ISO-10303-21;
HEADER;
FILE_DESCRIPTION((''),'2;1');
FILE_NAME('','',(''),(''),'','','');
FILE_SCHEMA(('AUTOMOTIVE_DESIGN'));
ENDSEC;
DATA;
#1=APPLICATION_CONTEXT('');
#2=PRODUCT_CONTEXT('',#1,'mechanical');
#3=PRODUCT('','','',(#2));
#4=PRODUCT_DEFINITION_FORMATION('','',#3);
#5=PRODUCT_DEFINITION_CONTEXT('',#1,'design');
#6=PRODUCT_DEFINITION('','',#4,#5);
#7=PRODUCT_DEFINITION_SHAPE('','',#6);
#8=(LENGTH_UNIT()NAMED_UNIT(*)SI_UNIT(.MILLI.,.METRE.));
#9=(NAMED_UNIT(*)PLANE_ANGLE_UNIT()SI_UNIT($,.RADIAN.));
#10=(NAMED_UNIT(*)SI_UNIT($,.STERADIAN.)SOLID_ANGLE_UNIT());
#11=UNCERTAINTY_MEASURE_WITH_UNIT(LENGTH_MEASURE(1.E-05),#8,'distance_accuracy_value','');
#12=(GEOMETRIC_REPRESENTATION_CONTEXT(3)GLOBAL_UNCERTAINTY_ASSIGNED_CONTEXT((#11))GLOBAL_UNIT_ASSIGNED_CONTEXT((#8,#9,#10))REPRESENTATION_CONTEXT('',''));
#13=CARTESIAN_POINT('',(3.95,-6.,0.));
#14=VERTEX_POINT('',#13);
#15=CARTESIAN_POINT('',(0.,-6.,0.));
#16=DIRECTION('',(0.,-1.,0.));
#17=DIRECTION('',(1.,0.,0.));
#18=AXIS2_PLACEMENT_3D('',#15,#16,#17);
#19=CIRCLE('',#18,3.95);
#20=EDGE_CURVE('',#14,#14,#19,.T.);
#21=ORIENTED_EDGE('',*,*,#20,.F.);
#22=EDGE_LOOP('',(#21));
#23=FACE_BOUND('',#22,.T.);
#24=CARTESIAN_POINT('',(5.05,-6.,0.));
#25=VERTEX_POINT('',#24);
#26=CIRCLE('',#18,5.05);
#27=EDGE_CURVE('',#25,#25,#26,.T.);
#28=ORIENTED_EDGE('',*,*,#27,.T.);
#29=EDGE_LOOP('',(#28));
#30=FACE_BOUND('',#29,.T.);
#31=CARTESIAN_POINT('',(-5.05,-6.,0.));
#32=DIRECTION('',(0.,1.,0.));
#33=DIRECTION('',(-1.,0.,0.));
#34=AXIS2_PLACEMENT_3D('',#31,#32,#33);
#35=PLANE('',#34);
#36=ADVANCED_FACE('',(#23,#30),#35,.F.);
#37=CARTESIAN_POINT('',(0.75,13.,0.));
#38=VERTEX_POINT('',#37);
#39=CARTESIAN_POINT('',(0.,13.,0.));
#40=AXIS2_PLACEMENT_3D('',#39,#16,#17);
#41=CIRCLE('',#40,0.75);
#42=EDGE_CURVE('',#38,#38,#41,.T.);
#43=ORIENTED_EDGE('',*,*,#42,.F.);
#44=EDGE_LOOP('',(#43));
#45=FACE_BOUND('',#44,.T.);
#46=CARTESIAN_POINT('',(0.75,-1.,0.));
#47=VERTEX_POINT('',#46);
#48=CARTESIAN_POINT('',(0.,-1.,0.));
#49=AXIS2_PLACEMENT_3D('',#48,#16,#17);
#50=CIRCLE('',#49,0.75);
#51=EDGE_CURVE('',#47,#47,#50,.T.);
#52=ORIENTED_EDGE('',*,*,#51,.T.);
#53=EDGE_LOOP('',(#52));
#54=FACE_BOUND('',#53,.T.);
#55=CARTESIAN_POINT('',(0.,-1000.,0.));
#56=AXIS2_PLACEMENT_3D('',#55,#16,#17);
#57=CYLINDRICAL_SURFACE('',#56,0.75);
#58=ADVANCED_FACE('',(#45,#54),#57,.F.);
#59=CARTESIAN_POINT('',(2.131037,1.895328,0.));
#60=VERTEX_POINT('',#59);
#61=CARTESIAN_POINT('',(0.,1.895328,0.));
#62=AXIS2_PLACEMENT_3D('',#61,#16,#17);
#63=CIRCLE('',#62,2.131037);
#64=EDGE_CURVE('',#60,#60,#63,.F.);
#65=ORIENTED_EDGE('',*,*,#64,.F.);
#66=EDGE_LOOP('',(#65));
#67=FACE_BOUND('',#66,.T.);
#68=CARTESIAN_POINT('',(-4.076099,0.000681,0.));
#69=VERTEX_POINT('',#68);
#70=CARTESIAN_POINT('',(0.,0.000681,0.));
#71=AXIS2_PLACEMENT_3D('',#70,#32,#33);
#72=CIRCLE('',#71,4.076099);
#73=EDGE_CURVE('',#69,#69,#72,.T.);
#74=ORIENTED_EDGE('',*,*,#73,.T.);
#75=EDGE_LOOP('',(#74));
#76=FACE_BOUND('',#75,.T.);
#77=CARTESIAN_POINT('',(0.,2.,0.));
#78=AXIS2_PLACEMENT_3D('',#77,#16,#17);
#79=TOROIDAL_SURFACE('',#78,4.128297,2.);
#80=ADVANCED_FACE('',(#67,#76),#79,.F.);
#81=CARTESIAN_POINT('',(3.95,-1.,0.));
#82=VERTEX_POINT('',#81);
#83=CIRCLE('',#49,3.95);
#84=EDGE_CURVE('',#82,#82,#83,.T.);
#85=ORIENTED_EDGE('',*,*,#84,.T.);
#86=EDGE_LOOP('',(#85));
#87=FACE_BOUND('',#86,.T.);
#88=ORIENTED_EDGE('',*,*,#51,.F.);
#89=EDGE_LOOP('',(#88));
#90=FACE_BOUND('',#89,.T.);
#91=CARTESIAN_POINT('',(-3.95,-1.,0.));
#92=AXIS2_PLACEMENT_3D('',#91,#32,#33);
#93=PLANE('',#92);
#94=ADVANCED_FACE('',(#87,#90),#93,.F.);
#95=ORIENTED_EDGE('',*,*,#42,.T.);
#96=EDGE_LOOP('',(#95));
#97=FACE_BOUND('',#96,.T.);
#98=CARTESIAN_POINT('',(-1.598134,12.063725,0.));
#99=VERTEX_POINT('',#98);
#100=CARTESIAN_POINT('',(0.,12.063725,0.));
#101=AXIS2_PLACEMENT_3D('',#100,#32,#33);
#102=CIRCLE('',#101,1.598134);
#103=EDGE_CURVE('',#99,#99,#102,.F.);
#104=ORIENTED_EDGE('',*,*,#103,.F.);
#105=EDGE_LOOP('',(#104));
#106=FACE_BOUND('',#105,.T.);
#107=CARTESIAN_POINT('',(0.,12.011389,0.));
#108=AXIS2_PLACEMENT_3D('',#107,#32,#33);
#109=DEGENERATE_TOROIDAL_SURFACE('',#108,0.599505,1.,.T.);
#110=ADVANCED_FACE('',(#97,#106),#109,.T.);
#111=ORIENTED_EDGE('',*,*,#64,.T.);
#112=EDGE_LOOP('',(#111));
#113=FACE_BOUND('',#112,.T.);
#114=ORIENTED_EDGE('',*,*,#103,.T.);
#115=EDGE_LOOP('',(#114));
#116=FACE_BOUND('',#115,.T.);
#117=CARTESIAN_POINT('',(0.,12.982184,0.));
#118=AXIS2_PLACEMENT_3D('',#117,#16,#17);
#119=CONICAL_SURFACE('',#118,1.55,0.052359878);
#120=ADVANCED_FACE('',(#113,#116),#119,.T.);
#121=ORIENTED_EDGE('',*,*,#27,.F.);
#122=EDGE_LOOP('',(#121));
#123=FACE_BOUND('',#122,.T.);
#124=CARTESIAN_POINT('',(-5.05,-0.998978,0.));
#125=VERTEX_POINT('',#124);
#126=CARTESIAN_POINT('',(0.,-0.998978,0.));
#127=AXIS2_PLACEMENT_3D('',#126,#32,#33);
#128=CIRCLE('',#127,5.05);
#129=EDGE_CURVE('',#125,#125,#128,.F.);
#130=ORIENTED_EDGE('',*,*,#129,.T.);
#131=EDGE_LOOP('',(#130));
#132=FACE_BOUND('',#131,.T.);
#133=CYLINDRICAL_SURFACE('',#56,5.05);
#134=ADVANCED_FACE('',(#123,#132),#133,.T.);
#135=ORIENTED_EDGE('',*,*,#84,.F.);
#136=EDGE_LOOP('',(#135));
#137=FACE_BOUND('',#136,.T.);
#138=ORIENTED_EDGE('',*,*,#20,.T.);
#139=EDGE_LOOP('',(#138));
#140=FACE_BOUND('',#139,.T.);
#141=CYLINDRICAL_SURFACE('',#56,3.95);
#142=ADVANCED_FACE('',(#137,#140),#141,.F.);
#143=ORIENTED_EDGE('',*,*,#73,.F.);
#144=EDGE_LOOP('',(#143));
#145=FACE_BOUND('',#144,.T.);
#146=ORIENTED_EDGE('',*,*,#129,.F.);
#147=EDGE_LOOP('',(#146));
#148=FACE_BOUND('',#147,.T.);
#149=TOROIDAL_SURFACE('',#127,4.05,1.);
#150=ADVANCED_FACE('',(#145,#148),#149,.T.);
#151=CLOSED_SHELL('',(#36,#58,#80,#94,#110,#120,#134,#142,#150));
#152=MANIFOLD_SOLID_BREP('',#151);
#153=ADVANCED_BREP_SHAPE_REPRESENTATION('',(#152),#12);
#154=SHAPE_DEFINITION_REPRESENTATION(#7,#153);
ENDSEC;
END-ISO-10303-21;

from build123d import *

# Parameters (mm, degrees)
FILLET2_R = 2
FILLET3_R = 1
FILLET4_R = 1


with BuildPart() as part:
    # Sketch2 → Revolve1 (revolve)
    with BuildSketch(Plane.XY, mode=Mode.PRIVATE) as revolve1_sk:
        Polygon((-1.55, 12.982183952), (-2.230367431, 0), (-5.05, 0), (-5.05, -6), (-3.95, -6), (-3.95, -1), (-0.75, -1), (-0.75, 13), align=None)
    revolve(revolve1_sk.sketch.rotate(Axis((0, -1000, 0), (0, 1, 0)), 180), axis=Axis((0, -1000, 0), (0, 1, 0)))

    # Fillet2
    fillet2_edges = [part.edges().sort_by_distance(p)[0] for p in [
        (-2.230367431, 0, 0),
    ]]
    fillet(fillet2_edges, radius=FILLET2_R)

    # Fillet3
    fillet3_edges = [part.edges().sort_by_distance(p)[0] for p in [
        (-5.05, 0, 0),
    ]]
    fillet(fillet3_edges, radius=FILLET3_R)

    # Fillet4
    # the kernel refuses this fillet: 1 mm, written as the material it takes off along each edge
    with BuildSketch(Plane(origin=(0, 12.982183952, 0), x_dir=(1, 0, 0), z_dir=(0, 0, 1))) as fillet4_piece_1:
        with BuildLine():
            CenterArc((0.599504848, -0.970794699), FILLET4_R, 3, 78.344377595)
            Line((0.75, 0.017816048), (0.753009903, 0.037588263))
            ThreePointArc((0.753009903, 0.037588263), (1.150445291, 0.028903066), (1.550445291, 0.019995042))
            Line((1.550445291, 0.019995042), (1.569972591, 0.001046719))
            Line((1.569972591, 0.001046719), (1.618106974, -0.917412024))
            Line((1.618106974, -0.917412024), (1.598134383, -0.918458743))
        make_face()
    revolve(axis=Axis((0, 12.982183952, 0), (0, 1, 0)), mode=Mode.SUBTRACT)


solid = part.part
